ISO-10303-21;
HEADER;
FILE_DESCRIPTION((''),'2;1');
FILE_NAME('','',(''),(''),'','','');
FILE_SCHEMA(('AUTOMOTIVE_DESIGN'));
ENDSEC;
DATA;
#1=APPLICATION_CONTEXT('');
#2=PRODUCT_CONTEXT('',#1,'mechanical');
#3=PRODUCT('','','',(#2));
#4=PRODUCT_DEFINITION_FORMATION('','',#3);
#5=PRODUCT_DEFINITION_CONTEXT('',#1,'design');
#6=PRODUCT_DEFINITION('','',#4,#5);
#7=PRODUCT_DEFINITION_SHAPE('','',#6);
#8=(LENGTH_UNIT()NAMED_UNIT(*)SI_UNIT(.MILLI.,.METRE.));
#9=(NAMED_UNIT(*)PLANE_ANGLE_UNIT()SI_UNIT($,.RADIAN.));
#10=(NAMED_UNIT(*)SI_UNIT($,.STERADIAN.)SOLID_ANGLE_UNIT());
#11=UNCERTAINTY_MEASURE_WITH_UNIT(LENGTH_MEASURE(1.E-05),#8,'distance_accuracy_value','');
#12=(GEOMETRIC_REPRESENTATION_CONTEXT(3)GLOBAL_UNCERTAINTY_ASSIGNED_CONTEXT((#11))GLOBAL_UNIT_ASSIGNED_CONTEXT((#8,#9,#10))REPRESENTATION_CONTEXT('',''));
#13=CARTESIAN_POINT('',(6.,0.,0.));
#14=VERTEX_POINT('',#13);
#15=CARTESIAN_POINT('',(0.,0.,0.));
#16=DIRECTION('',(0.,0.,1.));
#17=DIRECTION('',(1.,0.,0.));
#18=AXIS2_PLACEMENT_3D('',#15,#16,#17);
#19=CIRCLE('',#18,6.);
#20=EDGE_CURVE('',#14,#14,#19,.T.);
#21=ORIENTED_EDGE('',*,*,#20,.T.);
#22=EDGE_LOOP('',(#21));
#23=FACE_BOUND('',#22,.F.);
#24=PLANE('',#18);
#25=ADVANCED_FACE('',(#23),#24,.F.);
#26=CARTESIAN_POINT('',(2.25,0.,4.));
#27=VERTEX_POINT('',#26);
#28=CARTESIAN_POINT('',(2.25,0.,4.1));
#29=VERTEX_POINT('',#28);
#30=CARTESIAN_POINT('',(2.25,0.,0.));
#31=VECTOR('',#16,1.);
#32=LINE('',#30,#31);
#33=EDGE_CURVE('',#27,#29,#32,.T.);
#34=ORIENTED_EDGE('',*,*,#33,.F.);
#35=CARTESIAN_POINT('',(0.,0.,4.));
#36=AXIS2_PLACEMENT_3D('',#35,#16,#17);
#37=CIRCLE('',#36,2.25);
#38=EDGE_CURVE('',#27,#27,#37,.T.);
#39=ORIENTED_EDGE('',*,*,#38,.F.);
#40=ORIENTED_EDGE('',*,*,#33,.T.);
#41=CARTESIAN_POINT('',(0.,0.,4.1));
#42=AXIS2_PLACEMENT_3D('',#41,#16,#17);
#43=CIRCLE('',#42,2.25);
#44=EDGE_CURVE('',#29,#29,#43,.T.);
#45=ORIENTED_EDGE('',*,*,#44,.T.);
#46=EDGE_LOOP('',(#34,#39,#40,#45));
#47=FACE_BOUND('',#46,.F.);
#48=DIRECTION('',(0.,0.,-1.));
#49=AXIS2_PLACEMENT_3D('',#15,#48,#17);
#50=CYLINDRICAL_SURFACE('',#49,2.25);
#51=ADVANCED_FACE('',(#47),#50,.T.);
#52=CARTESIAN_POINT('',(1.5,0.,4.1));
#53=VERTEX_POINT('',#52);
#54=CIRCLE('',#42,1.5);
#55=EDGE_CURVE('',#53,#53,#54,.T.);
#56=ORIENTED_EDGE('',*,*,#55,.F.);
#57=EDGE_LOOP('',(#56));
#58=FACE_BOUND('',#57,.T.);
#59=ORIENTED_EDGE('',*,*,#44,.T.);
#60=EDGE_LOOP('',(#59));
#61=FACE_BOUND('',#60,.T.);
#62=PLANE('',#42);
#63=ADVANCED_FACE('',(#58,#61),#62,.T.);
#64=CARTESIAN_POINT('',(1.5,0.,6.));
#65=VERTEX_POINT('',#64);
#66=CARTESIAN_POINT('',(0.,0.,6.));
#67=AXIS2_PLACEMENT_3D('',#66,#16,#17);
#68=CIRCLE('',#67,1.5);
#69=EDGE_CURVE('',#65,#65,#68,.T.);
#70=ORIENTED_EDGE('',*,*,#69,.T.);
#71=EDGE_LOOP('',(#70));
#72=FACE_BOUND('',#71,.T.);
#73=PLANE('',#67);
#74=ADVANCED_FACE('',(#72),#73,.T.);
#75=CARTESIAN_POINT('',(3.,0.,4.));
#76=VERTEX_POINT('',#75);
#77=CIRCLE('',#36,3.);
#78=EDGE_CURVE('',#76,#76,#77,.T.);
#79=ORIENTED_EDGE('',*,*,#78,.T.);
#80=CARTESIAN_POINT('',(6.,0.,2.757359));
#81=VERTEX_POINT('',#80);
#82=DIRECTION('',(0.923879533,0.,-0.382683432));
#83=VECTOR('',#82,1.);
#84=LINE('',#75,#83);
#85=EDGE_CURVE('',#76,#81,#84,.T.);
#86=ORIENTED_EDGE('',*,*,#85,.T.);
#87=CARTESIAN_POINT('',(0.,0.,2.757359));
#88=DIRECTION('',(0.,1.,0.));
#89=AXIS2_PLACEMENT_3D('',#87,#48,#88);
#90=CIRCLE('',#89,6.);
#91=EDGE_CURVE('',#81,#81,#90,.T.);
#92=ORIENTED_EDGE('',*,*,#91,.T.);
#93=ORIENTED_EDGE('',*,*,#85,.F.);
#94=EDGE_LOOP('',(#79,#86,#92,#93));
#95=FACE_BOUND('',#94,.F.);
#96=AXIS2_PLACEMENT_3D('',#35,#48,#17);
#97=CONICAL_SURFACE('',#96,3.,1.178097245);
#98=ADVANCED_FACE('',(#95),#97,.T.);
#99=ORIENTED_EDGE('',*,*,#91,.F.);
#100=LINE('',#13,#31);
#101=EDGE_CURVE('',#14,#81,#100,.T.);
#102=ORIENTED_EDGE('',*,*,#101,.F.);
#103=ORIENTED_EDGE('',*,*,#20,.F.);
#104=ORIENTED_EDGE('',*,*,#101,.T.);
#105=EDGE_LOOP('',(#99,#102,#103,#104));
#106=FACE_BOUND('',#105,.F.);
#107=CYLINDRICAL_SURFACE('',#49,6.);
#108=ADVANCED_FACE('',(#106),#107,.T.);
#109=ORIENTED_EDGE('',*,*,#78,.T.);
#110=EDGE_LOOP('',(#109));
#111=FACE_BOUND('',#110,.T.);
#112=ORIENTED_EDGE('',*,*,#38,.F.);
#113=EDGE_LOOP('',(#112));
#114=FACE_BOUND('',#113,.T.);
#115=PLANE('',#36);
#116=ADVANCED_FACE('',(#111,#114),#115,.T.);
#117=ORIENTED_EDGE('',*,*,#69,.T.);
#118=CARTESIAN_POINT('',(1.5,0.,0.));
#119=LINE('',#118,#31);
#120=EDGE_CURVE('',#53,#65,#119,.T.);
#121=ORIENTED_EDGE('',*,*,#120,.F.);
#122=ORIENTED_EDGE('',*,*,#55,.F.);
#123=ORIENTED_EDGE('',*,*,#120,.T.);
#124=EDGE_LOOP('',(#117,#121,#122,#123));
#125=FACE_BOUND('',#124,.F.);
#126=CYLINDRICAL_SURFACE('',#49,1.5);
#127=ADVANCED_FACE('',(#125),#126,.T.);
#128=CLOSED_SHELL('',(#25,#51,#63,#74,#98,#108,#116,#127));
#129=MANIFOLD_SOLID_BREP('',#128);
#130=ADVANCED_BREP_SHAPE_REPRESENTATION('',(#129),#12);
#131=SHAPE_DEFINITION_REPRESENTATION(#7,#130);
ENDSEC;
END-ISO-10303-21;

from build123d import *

# Parameters (mm, degrees)
F0_R     = 1.5
F1_DEPTH = 6
F0_R_2   = 2.25
F2_DEPTH = 4.1
F0_R_3   = 6
F3_DEPTH = 4
F4_SIZE  = 1


# Not quite as in the source:
# - a fillet or chamfer that OpenCascade refuses, or shapes differently, is made with other operations: its cross-section is extruded or revolved along the edge and cut away or added


with BuildPart() as f1:
    # F0 (on Top) → F1 (new body)
    with BuildSketch(Plane.XY):
        Circle(F0_R)
    extrude(amount=F1_DEPTH)

    # F0 (on Top) → F2 (join)
    with BuildSketch(Plane.XY):
        Circle(F0_R_2)
        Circle(F0_R, mode=Mode.SUBTRACT)
    extrude(amount=F2_DEPTH)

    # F0 (on Top) → F3 (join)
    with BuildSketch(Plane.XY):
        Circle(F0_R_3)
        Circle(F0_R_2, mode=Mode.SUBTRACT)
    extrude(amount=F3_DEPTH)

    # F4
    f4_edges = [f1.edges().sort_by_distance(p)[0] for p in [
        (-6, 0, 4),
    ]]
    chamfer(f4_edges, length=F4_SIZE)

    # F5: chamfer of 2 on 1 edges, made by hand

    # F5_s1 → F5_t2 (revolve, cut)
    with BuildSketch(Plane.XZ):
        Polygon((3, 4), (6.4142135624, 2.5857864376), (5, 4), align=None)
    revolve(axis=Axis((0, 0, 4), (0, 0, 1)), mode=Mode.SUBTRACT)


solid = f1.part
